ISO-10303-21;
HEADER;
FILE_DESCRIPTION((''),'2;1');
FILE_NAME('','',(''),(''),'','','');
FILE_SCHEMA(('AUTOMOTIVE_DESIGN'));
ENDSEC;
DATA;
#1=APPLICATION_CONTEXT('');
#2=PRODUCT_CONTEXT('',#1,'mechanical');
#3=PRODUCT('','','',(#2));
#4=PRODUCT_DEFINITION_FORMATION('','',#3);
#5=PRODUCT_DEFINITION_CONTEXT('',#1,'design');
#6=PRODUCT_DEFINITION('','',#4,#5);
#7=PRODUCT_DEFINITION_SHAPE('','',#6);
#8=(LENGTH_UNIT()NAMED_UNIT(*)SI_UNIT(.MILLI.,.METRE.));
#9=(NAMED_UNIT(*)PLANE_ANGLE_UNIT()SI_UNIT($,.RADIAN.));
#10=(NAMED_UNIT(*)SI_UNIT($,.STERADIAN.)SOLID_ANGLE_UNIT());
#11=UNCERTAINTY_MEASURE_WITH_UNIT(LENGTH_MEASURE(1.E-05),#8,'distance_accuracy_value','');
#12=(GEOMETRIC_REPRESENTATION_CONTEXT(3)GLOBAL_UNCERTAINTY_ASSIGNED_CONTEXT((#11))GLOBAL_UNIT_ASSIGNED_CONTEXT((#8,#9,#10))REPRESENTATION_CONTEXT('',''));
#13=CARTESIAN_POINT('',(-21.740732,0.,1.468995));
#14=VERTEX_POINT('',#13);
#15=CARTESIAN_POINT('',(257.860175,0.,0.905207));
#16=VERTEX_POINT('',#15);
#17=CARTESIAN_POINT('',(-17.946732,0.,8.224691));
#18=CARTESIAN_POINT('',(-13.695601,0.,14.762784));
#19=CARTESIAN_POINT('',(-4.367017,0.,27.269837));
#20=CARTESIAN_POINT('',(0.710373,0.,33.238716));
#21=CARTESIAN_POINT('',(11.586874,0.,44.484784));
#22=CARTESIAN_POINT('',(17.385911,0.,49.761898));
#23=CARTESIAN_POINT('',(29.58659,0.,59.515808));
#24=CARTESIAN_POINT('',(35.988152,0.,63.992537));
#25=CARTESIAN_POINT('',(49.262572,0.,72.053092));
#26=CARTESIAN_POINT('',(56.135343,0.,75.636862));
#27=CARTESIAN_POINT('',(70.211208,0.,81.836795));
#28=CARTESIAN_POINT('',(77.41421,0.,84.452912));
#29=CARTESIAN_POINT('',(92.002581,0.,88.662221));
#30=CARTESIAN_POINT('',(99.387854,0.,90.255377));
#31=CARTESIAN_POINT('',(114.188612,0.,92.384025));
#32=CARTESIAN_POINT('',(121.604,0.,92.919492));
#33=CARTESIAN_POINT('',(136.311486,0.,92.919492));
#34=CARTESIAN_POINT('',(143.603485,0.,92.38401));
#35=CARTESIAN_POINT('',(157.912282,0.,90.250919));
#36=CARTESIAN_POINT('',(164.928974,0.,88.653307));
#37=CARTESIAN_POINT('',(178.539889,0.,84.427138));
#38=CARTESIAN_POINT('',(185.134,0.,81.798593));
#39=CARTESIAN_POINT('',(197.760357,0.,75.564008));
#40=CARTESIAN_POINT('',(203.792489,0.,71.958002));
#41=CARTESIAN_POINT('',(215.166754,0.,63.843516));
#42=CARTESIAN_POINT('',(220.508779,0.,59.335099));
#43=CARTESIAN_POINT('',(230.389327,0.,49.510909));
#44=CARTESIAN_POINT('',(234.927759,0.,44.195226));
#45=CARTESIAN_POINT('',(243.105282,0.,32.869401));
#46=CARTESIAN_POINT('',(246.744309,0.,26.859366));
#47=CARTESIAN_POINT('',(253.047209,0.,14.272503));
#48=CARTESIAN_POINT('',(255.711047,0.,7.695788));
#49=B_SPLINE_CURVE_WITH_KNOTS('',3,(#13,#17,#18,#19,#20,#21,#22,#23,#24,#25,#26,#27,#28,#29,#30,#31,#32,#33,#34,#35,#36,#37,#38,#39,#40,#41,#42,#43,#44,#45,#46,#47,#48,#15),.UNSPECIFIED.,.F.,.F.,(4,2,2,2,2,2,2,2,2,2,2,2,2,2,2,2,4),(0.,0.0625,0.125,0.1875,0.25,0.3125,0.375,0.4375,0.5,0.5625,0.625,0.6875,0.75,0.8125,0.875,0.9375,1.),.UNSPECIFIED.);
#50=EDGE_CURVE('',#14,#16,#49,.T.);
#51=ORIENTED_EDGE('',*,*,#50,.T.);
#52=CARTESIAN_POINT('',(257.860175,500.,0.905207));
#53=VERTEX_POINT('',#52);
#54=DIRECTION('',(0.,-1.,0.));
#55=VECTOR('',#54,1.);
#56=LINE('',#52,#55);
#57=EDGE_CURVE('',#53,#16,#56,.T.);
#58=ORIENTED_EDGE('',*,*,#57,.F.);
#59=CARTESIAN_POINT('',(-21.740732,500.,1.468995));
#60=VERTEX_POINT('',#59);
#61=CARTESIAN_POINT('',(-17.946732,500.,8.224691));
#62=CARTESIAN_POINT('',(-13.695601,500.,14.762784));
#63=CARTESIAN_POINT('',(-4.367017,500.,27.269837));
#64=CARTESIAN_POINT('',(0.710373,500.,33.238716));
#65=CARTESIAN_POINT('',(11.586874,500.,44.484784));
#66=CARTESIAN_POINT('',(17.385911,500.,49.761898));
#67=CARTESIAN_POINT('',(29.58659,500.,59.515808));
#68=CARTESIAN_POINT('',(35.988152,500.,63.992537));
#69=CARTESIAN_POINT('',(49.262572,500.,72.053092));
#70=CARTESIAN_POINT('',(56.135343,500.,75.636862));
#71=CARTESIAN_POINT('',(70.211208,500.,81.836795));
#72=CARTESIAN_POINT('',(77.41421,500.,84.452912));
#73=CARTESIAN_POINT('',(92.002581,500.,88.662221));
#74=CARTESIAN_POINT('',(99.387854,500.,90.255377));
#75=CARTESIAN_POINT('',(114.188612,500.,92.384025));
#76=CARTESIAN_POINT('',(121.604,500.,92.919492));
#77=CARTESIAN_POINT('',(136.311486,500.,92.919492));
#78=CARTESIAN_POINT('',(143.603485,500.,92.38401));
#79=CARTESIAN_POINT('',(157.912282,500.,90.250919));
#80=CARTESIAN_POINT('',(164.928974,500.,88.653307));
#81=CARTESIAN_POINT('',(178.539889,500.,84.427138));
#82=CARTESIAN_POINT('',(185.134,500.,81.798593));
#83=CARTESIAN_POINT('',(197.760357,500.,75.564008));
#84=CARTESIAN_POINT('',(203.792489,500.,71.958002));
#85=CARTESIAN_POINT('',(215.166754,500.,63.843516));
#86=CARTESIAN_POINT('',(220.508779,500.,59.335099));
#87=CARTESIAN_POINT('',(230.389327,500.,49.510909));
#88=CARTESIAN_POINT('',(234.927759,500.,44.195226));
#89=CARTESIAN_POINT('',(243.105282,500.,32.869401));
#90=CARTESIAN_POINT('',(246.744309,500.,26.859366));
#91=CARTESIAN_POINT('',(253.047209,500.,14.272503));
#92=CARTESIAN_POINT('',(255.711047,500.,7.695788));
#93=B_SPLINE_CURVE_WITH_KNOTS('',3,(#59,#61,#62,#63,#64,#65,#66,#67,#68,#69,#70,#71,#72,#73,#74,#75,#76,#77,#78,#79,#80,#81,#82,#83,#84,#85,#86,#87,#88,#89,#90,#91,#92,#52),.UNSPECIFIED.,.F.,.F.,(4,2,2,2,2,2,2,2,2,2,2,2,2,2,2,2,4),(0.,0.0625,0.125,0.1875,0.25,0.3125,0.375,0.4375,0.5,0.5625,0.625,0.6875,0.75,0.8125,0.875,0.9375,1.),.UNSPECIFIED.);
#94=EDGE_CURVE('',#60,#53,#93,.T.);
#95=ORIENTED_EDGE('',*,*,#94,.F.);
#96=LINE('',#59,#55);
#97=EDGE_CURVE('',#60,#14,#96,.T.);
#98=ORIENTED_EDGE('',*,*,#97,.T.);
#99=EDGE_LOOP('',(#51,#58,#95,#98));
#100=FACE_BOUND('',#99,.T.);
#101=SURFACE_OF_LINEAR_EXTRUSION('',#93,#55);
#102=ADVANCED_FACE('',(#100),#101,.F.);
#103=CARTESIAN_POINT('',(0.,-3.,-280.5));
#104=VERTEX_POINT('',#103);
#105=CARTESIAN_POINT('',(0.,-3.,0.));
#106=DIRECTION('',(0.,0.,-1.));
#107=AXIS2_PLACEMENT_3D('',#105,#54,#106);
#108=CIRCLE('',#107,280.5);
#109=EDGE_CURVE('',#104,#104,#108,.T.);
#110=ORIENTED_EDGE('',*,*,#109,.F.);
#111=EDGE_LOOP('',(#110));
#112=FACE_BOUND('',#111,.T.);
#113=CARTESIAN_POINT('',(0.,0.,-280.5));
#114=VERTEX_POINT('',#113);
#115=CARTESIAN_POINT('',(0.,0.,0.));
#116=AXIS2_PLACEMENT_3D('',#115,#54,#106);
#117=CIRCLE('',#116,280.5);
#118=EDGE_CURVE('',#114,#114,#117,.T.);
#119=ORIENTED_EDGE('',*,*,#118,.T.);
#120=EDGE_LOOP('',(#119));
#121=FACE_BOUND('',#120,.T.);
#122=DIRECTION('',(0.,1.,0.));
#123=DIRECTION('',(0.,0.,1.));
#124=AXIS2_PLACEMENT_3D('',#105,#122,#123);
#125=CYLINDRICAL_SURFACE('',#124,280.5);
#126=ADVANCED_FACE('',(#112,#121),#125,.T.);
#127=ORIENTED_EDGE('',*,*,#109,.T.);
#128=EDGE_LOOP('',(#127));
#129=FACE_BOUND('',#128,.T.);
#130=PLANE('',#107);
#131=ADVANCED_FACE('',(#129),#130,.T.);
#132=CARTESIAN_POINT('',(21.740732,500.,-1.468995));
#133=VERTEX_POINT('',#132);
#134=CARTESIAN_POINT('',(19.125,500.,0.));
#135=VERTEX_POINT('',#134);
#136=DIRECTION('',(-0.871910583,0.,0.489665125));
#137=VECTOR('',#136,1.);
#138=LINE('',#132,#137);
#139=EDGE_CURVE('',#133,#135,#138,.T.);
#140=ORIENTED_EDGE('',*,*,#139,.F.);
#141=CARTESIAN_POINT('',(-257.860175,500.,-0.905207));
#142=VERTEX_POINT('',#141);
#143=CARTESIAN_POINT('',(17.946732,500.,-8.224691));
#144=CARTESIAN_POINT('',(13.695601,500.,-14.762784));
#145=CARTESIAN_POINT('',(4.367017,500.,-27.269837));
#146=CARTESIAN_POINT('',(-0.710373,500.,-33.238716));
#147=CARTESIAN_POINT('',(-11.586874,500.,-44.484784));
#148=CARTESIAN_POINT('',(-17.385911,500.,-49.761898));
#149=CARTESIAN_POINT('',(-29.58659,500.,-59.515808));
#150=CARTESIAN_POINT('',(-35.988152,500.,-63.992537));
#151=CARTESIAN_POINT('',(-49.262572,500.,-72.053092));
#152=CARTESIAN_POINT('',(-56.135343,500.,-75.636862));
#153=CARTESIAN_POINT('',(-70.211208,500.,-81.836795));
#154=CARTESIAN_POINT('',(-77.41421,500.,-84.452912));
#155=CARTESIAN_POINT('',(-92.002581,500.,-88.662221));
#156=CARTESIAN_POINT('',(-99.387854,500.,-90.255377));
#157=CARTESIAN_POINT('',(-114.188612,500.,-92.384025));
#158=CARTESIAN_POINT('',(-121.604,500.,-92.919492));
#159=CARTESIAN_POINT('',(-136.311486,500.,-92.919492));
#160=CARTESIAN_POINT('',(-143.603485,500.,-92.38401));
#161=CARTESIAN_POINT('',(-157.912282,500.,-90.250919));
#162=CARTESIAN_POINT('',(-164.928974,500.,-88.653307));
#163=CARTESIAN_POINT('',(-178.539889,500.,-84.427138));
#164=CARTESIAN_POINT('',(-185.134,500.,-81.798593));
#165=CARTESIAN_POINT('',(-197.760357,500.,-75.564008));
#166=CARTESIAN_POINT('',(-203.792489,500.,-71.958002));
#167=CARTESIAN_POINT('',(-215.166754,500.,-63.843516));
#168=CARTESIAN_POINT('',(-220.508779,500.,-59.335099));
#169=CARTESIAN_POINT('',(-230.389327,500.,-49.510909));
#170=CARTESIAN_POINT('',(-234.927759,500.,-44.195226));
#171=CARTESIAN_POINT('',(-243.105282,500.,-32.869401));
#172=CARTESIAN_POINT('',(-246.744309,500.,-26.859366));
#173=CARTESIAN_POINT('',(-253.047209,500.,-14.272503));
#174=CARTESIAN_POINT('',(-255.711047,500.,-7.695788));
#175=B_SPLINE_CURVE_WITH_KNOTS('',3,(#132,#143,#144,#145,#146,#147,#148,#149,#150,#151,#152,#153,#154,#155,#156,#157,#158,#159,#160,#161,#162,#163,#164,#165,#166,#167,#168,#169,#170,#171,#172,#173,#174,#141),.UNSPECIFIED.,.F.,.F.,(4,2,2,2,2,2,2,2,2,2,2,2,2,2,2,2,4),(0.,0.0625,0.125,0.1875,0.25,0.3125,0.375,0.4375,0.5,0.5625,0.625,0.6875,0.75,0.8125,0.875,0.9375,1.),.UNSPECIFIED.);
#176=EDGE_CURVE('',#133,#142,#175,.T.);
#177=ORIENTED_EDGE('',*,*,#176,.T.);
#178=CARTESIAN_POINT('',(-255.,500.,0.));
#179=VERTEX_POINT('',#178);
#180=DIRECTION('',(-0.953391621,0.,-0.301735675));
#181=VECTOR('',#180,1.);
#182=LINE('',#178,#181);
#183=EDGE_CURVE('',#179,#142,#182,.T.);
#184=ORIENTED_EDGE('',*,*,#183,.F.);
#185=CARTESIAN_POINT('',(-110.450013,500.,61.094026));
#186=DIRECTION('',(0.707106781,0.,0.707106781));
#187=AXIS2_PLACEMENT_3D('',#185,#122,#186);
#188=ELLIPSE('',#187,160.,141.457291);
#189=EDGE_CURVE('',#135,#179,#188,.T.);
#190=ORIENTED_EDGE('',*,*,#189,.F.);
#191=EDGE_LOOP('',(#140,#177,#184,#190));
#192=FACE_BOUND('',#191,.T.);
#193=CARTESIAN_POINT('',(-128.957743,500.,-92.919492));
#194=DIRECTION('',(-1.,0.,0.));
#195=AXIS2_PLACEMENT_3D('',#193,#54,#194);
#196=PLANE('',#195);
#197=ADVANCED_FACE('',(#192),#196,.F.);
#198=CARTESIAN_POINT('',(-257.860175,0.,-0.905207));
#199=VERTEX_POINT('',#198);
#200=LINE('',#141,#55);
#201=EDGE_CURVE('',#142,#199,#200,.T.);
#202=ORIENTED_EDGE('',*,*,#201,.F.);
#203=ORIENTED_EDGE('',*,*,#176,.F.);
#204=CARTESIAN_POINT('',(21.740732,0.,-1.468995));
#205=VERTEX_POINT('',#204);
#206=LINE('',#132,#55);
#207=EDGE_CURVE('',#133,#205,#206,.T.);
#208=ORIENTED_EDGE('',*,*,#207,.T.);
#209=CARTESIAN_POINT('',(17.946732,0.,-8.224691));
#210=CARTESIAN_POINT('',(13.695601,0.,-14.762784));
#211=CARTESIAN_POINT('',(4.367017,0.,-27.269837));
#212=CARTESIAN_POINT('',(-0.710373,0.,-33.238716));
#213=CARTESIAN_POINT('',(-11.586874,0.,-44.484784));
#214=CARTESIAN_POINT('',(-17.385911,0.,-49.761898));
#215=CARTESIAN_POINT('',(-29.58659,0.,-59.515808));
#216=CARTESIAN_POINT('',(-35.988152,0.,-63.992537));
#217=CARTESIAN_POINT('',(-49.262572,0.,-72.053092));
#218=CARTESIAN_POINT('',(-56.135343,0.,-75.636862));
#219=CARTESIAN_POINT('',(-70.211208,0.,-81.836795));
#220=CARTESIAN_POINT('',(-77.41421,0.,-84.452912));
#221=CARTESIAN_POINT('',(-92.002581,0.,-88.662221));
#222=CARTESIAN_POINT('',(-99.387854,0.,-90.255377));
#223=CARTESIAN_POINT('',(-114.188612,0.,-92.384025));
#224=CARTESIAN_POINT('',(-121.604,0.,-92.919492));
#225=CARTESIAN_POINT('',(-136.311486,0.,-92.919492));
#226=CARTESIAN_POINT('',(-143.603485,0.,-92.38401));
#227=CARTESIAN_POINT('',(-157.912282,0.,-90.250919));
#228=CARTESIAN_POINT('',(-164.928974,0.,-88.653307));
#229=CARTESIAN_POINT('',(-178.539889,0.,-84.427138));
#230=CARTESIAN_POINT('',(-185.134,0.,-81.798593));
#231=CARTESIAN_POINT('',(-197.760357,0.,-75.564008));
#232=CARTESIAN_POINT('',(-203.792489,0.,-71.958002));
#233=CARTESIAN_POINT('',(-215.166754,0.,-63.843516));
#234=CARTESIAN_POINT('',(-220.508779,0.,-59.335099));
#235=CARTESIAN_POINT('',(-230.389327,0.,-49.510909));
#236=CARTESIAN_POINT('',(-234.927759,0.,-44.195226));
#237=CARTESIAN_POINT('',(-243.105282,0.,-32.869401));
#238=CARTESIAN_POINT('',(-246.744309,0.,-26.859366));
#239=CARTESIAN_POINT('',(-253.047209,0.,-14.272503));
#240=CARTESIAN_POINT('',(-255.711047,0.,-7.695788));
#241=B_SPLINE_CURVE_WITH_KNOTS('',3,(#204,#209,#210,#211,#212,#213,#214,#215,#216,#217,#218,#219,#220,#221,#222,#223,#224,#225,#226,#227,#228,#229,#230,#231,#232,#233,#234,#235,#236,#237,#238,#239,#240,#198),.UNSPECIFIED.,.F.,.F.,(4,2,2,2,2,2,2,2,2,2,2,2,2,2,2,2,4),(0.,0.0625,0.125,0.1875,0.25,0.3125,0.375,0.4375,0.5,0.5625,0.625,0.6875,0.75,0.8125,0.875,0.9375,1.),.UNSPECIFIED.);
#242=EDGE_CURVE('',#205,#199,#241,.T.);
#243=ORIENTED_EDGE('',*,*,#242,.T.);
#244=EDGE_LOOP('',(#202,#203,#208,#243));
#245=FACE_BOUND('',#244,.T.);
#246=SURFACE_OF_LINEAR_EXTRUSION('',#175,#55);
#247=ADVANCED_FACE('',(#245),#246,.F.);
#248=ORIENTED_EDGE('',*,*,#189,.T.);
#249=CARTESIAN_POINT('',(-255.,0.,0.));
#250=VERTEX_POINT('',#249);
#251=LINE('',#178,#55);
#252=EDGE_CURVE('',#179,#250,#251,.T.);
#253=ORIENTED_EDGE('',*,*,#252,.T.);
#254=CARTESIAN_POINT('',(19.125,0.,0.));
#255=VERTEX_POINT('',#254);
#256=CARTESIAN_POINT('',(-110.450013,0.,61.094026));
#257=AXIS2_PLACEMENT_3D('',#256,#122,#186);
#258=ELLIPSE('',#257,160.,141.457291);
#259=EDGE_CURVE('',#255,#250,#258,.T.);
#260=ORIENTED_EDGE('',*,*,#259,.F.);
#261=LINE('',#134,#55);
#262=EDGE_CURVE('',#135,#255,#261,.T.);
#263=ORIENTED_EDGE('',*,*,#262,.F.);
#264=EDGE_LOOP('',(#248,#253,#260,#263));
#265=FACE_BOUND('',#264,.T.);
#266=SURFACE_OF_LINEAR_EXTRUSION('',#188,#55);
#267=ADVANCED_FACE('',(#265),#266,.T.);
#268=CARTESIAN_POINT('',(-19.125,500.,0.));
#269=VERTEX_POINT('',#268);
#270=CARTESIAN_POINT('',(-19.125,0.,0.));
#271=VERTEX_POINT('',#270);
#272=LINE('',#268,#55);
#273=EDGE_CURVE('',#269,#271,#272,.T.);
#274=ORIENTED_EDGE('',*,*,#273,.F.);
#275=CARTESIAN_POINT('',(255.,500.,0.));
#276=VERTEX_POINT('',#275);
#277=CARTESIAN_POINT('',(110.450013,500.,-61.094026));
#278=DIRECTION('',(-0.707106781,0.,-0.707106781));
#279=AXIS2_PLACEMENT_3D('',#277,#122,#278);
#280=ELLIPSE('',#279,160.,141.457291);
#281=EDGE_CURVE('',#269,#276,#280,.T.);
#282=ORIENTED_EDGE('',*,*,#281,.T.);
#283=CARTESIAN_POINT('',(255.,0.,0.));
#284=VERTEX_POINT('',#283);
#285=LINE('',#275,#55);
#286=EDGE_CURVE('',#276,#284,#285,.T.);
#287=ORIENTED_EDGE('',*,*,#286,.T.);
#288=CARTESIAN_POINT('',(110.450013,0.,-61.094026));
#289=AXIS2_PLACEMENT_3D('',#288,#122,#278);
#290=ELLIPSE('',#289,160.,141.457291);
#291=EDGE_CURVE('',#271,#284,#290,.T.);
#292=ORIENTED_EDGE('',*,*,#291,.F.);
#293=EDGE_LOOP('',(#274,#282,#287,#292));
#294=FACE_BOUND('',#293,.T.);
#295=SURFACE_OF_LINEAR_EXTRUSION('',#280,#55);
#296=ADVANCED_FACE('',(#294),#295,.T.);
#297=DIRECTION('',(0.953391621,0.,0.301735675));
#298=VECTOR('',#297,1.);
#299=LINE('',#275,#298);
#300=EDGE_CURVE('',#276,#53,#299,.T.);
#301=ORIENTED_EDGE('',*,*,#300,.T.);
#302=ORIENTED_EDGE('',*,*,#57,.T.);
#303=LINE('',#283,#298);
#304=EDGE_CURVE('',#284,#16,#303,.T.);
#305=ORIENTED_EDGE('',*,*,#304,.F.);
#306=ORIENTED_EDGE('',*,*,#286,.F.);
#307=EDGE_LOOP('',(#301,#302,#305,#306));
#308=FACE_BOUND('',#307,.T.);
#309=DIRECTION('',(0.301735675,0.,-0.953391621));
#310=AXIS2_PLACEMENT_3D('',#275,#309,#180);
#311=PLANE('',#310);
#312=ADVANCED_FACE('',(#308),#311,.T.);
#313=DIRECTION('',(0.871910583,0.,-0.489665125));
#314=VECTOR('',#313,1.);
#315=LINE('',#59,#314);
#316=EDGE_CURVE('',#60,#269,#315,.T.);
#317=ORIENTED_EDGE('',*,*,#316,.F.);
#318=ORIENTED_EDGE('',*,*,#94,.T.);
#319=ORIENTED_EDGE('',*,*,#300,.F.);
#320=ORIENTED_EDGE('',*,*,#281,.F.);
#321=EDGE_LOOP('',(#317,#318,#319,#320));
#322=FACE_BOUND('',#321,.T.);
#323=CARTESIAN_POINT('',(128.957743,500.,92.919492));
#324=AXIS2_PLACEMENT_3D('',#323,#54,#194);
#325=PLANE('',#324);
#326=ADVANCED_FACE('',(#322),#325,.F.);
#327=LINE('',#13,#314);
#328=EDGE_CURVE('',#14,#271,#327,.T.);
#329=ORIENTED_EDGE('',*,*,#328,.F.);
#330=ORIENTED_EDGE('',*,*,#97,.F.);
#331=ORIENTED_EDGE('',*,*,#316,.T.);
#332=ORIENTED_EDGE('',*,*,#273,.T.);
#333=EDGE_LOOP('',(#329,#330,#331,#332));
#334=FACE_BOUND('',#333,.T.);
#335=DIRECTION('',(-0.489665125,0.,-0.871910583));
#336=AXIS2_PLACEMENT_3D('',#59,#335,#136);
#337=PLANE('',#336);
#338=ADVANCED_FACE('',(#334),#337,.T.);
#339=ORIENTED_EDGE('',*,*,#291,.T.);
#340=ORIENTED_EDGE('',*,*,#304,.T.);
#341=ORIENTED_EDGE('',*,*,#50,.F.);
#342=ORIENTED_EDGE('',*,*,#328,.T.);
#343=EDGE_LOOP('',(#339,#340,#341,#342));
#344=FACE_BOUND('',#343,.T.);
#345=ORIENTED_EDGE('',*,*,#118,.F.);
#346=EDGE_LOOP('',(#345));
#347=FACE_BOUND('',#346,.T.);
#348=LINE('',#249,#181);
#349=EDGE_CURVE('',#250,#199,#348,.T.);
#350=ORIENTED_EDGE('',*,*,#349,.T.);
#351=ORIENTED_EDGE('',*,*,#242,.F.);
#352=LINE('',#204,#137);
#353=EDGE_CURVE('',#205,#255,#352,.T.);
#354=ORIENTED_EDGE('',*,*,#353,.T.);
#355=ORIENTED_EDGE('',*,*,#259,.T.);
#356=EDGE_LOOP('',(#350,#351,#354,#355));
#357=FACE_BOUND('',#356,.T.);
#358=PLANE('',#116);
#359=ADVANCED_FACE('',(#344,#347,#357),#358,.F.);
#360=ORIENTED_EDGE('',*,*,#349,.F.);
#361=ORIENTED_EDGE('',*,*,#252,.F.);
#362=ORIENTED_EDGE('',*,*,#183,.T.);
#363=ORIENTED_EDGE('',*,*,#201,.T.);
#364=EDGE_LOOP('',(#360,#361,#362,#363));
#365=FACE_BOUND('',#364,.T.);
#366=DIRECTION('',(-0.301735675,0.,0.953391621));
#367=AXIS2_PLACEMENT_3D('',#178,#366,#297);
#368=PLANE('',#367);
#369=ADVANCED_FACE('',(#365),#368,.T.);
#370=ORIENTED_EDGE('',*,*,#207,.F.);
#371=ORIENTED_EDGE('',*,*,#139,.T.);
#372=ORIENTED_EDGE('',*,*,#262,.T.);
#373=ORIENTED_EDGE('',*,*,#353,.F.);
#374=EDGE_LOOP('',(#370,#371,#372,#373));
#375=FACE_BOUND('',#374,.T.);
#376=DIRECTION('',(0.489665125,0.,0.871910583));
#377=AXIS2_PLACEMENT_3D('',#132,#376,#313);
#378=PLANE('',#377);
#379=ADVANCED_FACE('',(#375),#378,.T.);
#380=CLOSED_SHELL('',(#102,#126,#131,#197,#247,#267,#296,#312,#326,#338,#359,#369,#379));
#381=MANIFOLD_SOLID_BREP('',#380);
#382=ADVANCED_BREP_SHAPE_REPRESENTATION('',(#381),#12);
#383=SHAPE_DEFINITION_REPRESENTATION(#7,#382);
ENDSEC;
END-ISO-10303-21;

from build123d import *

# Parameters (mm, degrees)
EXTRUIR_L_MINA1_DEPTH      = 500
CROQUIS2_R                 = 280.5
SALIENTE_EXTRUIR8_DEPTH    = 3
S_LIDO_MOVER_COPIAR1_ANGLE = 90
S_LIDO_MOVER_COPIAR4_ANGLE = 30
S_LIDO_MOVER_COPIAR5_ANGLE = 60


# Read off the part's stored shape, not the designer's step: Extruir-Lámina1
with BuildPart() as part:
    # Extruir-Lámina1 outline → Extruir-Lámina1 (new body)
    with BuildSketch(Plane(origin=(0, 0, 0), x_dir=(1, 0, 0), z_dir=(0, 1, 0))):
        with BuildLine():
            Line((19.125, 0), (21.74073175, 1.468995374))
            add(Edge.make_bspline(
                [(21.74073175, 1.468995374), (17.946731989, 8.224691008), (13.69560143, 14.762783798), (4.367017147, 27.269837443), (-0.71037321, 33.238715513), (-11.586873507, 44.484783529), (-17.3859105, 49.761898252), (-29.586590101, 59.515807861), (-35.988151721, 63.992536753), (-49.262571773, 72.053091806), (-56.135343096, 75.636862301), (-70.211208073, 81.836795033), (-77.414210442, 84.452912303), (-92.002580634, 88.662220627), (-99.387854473, 90.255377069), (-114.188612377, 92.384025129), (-121.604000183, 92.919491806), (-136.311486484, 92.919491806), (-143.603485457, 92.384009771), (-157.912281808, 90.25091942), (-164.928974484, 88.653307228), (-178.539889063, 84.427137922), (-185.13400018, 81.798593281), (-197.760357085, 75.564007629), (-203.792489054, 71.958002232), (-215.166754121, 63.843516173), (-220.508778973, 59.335099151), (-230.38932678, 49.510909009), (-234.927758788, 44.195226033), (-243.105282037, 32.869400738), (-246.744308638, 26.85936626), (-253.047209415, 14.272502845), (-255.711047051, 7.695787707), (-257.860174862, 0.905207025)],
                knots=[0, 0, 0, 0, 0.0625, 0.0625, 0.125, 0.125, 0.1875, 0.1875, 0.25, 0.25, 0.3125, 0.3125, 0.375, 0.375, 0.4375, 0.4375, 0.5, 0.5, 0.5625, 0.5625, 0.625, 0.625, 0.6875, 0.6875, 0.75, 0.75, 0.8125, 0.8125, 0.875, 0.875, 0.9375, 0.9375, 1, 1, 1, 1], degree=3))
            Line((-257.860174862, 0.905207025), (-255, 0))
            add(Edge.make_bspline(
                [(19.125, 0), (-156.197816113, 312.184411633), (-255, 0)],
                knots=[1.263328629, 1.263328629, 1.263328629, 3.571926027, 3.571926027, 3.571926027], degree=2, weights=[1, 0.404559981, 1]))
        make_face()
        with BuildLine():
            Line((-19.125, 0), (-21.74073175, -1.468995374))
            add(Edge.make_bspline(
                [(-21.74073175, -1.468995374), (-17.946731989, -8.224691008), (-13.69560143, -14.762783798), (-4.367017147, -27.269837443), (0.71037321, -33.238715513), (11.586873507, -44.484783529), (17.3859105, -49.761898252), (29.586590101, -59.515807861), (35.988151721, -63.992536753), (49.262571773, -72.053091806), (56.135343096, -75.636862301), (70.211208073, -81.836795033), (77.414210442, -84.452912303), (92.002580634, -88.662220627), (99.387854473, -90.255377069), (114.188612377, -92.384025129), (121.604000183, -92.919491806), (136.311486484, -92.919491806), (143.603485457, -92.384009771), (157.912281808, -90.25091942), (164.928974484, -88.653307228), (178.539889063, -84.427137922), (185.13400018, -81.798593281), (197.760357085, -75.564007629), (203.792489054, -71.958002232), (215.166754121, -63.843516173), (220.508778973, -59.335099151), (230.38932678, -49.510909009), (234.927758788, -44.195226033), (243.105282037, -32.869400738), (246.744308638, -26.85936626), (253.047209415, -14.272502845), (255.711047051, -7.695787707), (257.860174862, -0.905207025)],
                knots=[0, 0, 0, 0, 0.0625, 0.0625, 0.125, 0.125, 0.1875, 0.1875, 0.25, 0.25, 0.3125, 0.3125, 0.375, 0.375, 0.4375, 0.4375, 0.5, 0.5, 0.5625, 0.5625, 0.625, 0.625, 0.6875, 0.6875, 0.75, 0.75, 0.8125, 0.8125, 0.875, 0.875, 0.9375, 0.9375, 1, 1, 1, 1], degree=3))
            Line((257.860174862, -0.905207025), (255, 0))
            add(Edge.make_bspline(
                [(-19.125, 0), (156.197816113, -312.184411633), (255, 0)],
                knots=[1.263328629, 1.263328629, 1.263328629, 3.571926027, 3.571926027, 3.571926027], degree=2, weights=[1, 0.404559981, 1]))
        make_face()
    extrude(amount=EXTRUIR_L_MINA1_DEPTH)

    # Croquis2 → Saliente-Extruir8 (add)
    with BuildSketch(Plane.XZ):
        with Locations(Location((0, 0, 0), (0, 0, 270))):
            Circle(CROQUIS2_R)
    extrude(amount=SALIENTE_EXTRUIR8_DEPTH)


with BuildPart() as part_1:
    # Sólido-Mover/Copiar1: moved
    add(part.part.rotate(Axis((0, 0, 0), (0, -1, 0)), S_LIDO_MOVER_COPIAR1_ANGLE))


with BuildPart() as part_2:
    # Sólido-Mover/Copiar4: moved
    add(part_1.part.rotate(Axis((0, 0, 0), (0, 1, 0)), S_LIDO_MOVER_COPIAR4_ANGLE))


with BuildPart() as part_3:
    # Sólido-Mover/Copiar5: moved
    add(part_2.part.rotate(Axis((0, 0, 0), (0, 1, 0)), S_LIDO_MOVER_COPIAR5_ANGLE))


solid = part_3.part
